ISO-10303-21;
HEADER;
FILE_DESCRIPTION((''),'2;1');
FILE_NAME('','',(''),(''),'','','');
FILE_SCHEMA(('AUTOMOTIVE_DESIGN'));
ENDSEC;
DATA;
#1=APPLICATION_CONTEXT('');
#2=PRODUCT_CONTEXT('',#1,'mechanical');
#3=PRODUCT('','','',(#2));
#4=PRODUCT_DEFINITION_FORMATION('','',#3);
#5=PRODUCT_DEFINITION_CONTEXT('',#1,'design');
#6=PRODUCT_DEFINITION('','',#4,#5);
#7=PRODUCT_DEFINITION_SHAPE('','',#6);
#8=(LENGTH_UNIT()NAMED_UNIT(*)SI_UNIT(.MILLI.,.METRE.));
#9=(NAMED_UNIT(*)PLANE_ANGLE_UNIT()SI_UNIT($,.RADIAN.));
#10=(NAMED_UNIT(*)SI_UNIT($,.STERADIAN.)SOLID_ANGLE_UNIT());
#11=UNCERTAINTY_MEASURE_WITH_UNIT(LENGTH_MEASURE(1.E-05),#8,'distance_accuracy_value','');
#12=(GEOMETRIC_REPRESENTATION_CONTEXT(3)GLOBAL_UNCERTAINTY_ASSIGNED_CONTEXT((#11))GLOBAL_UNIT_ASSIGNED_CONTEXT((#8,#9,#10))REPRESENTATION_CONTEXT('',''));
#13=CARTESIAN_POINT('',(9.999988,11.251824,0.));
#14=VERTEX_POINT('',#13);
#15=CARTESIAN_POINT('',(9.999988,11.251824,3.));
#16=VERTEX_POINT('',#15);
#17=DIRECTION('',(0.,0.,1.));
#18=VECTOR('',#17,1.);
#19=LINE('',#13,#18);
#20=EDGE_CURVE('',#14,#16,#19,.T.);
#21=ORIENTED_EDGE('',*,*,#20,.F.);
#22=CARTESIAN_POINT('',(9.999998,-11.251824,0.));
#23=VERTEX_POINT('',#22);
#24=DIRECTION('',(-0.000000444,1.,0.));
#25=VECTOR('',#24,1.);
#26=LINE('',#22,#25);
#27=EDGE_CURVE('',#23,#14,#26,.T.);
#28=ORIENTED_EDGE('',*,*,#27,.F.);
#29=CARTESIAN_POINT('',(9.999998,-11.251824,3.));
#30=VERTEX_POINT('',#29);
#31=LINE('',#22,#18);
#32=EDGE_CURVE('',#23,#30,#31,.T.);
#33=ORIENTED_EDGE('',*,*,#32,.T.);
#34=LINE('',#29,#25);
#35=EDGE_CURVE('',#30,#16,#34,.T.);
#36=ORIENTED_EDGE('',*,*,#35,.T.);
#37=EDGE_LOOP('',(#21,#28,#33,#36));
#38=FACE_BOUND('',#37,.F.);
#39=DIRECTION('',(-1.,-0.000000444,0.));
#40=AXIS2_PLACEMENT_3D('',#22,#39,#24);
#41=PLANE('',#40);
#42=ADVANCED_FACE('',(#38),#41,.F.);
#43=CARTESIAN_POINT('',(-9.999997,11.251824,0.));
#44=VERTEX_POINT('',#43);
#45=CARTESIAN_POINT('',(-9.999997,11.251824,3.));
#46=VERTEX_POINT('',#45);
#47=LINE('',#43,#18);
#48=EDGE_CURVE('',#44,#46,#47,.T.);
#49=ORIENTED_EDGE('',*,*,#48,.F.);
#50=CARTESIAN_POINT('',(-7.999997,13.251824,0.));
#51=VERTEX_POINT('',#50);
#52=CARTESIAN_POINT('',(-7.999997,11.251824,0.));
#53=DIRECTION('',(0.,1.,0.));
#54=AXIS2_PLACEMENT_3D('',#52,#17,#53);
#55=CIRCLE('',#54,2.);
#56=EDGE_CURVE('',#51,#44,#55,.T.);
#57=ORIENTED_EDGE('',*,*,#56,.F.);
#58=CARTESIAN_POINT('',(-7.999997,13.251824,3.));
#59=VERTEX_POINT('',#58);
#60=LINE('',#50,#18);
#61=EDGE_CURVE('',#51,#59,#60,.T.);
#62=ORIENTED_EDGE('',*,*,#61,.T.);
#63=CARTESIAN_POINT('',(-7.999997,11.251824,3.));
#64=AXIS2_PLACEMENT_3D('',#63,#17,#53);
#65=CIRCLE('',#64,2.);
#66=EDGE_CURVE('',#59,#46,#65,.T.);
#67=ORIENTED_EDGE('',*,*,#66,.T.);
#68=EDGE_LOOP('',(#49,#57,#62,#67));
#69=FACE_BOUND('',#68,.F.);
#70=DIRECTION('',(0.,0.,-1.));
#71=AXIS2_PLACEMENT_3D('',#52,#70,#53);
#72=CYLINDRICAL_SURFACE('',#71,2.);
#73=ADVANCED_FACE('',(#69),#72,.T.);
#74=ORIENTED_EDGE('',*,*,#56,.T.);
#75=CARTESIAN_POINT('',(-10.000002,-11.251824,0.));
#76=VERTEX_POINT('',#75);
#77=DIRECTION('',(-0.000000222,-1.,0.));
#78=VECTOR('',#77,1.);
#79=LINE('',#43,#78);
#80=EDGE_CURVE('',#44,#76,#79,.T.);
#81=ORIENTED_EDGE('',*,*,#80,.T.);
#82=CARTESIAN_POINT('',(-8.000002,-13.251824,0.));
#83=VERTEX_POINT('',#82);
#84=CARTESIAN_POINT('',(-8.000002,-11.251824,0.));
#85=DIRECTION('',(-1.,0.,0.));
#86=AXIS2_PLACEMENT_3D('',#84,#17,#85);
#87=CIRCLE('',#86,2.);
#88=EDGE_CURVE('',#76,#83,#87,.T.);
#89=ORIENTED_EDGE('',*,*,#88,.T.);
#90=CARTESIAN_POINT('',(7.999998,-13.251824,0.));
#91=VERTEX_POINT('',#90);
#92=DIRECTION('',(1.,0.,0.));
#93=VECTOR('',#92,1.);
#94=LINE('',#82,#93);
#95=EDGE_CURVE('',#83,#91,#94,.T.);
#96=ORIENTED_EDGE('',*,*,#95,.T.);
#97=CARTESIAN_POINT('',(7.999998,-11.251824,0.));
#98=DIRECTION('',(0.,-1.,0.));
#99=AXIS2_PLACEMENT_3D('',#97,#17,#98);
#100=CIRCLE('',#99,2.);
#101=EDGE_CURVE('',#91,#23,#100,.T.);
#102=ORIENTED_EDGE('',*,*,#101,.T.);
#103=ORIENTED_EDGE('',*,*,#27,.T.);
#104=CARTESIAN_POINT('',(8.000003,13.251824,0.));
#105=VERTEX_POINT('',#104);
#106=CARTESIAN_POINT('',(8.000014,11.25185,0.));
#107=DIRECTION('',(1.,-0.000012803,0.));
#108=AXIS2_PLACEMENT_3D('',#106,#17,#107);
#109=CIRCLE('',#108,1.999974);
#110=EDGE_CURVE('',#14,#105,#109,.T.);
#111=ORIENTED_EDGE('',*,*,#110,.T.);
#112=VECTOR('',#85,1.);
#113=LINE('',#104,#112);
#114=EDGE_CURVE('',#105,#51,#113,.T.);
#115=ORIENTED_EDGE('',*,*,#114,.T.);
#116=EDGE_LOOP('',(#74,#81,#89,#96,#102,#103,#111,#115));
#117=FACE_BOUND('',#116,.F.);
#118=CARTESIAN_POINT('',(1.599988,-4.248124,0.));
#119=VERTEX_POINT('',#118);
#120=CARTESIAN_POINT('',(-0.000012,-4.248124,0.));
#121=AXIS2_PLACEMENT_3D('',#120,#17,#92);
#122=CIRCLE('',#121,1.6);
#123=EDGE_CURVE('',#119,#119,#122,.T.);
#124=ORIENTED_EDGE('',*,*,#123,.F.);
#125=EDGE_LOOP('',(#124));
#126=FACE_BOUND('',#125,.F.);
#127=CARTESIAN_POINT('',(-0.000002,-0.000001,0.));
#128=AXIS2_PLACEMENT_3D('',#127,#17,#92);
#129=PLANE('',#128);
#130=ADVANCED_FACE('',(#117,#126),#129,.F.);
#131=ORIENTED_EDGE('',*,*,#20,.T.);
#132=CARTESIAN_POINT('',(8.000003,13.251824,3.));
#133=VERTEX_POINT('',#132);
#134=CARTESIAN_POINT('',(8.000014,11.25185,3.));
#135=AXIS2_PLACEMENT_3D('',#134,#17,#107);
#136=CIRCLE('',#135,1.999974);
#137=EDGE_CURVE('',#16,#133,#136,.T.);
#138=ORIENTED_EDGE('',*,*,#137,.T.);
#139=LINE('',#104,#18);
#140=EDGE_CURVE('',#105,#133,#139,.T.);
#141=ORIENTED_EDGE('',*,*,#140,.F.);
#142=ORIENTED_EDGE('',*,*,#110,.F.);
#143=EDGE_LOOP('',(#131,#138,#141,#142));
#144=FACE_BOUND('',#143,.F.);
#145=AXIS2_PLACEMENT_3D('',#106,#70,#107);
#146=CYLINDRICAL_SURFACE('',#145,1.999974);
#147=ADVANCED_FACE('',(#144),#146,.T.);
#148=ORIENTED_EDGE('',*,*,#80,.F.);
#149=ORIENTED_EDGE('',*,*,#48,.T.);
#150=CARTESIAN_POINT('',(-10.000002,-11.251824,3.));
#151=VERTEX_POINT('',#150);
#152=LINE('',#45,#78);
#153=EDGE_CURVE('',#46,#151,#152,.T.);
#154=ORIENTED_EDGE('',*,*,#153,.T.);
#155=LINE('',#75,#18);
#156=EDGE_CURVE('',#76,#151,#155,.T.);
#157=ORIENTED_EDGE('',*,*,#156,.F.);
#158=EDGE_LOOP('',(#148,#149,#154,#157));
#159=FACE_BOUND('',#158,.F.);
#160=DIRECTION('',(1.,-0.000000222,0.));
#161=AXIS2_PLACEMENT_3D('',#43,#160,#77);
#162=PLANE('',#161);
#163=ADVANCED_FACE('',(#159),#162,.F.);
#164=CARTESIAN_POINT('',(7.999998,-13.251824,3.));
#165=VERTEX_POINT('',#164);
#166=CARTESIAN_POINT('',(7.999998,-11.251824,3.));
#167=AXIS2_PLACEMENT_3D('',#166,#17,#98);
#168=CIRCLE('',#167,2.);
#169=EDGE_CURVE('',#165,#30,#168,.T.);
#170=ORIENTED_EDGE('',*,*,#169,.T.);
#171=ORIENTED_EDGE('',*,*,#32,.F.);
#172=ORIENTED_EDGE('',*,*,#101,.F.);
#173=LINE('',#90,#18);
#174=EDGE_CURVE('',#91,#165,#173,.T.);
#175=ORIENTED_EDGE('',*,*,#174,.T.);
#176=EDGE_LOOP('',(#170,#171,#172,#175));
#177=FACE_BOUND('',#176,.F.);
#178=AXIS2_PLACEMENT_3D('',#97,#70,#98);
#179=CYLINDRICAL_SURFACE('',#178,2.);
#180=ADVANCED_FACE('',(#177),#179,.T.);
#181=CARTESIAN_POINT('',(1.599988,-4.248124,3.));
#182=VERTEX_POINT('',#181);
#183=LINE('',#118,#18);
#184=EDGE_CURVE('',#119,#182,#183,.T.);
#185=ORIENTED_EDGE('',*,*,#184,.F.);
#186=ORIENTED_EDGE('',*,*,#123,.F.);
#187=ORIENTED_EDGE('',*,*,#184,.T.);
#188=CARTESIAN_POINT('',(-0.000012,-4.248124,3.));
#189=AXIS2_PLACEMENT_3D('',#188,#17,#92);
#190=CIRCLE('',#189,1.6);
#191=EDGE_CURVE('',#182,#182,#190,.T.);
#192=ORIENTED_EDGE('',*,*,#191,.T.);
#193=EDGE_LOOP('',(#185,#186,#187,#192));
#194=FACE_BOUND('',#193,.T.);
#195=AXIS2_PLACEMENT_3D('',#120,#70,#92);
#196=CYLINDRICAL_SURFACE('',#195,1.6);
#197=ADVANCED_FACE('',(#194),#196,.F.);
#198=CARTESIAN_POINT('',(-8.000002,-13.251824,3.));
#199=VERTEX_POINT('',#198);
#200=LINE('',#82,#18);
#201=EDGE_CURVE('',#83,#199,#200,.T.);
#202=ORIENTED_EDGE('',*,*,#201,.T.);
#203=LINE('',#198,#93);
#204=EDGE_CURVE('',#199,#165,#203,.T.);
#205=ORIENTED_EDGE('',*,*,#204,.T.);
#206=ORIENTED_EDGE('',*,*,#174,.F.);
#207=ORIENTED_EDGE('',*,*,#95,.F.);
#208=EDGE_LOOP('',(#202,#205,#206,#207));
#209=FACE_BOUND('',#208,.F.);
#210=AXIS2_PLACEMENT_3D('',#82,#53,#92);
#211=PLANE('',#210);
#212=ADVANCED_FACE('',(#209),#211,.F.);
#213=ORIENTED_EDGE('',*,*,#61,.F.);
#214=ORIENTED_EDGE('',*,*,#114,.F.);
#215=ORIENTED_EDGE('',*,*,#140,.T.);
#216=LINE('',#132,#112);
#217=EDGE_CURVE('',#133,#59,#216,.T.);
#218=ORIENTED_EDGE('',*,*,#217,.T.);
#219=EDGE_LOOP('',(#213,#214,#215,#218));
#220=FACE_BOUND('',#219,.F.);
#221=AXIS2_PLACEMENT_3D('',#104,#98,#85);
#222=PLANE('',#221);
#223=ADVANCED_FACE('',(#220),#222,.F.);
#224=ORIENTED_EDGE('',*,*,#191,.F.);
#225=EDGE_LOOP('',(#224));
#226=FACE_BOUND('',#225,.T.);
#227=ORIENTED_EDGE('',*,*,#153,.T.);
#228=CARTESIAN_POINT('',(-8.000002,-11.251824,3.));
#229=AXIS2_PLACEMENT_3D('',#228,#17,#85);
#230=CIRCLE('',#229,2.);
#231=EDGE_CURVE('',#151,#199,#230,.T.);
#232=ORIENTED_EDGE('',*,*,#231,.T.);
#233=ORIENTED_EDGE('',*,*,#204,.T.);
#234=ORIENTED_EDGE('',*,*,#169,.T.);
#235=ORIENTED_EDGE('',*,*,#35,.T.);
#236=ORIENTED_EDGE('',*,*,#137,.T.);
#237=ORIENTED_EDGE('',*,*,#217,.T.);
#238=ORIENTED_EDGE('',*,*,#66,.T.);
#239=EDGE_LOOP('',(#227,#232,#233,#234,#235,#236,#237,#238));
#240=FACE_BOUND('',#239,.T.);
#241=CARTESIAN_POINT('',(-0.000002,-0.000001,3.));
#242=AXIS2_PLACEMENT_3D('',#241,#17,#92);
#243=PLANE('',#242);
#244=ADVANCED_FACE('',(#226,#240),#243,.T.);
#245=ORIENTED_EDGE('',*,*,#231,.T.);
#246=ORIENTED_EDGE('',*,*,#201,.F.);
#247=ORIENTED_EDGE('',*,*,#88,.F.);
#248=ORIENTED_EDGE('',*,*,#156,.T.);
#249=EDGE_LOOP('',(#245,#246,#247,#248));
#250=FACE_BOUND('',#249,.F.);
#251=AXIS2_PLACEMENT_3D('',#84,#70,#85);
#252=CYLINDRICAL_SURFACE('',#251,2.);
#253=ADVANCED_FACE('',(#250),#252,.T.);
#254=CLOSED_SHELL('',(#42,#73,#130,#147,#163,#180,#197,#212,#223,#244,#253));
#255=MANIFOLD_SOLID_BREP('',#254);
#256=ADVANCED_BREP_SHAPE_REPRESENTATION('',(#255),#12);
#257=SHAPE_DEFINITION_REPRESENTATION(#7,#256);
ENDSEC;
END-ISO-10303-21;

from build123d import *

# Parameters (mm, degrees)
F0_R     = 1.6
F1_DEPTH = 3


# Not quite as in the source:
# - ends of sketch curves that miss each other by under 0.0002 mm in the source are joined


with BuildPart() as f1:
    # F0 (on Top) → F1 (new body)
    with BuildSketch(Plane.XY):
        with BuildLine():
            Line((8.000003, 13.251824), (-7.999997, 13.251824))
            ThreePointArc((-7.999997, 13.251824), (-9.4142105624, 12.6660375624), (-9.999997, 11.251824))
            Line((-9.999997, 11.251824), (-10.000002, -11.251824))
            ThreePointArc((-10.000002, -11.251824), (-9.4142155624, -12.6660375624), (-8.000002, -13.251824))
            Line((-8.000002, -13.251824), (7.999998, -13.251824))
            ThreePointArc((7.999998, -13.251824), (9.4142115624, -12.6660375624), (9.999998, -11.251824))
            Line((9.999998, -11.251824), (9.999988, 11.251824))
            ThreePointArc((9.999988, 11.251824), (9.4142165624, 12.6660375624), (8.000003, 13.251824))
        make_face()
        with Locations((-1.2e-05, -4.248124)):
            Circle(F0_R, mode=Mode.SUBTRACT)
    extrude(amount=F1_DEPTH)


solid = f1.part
